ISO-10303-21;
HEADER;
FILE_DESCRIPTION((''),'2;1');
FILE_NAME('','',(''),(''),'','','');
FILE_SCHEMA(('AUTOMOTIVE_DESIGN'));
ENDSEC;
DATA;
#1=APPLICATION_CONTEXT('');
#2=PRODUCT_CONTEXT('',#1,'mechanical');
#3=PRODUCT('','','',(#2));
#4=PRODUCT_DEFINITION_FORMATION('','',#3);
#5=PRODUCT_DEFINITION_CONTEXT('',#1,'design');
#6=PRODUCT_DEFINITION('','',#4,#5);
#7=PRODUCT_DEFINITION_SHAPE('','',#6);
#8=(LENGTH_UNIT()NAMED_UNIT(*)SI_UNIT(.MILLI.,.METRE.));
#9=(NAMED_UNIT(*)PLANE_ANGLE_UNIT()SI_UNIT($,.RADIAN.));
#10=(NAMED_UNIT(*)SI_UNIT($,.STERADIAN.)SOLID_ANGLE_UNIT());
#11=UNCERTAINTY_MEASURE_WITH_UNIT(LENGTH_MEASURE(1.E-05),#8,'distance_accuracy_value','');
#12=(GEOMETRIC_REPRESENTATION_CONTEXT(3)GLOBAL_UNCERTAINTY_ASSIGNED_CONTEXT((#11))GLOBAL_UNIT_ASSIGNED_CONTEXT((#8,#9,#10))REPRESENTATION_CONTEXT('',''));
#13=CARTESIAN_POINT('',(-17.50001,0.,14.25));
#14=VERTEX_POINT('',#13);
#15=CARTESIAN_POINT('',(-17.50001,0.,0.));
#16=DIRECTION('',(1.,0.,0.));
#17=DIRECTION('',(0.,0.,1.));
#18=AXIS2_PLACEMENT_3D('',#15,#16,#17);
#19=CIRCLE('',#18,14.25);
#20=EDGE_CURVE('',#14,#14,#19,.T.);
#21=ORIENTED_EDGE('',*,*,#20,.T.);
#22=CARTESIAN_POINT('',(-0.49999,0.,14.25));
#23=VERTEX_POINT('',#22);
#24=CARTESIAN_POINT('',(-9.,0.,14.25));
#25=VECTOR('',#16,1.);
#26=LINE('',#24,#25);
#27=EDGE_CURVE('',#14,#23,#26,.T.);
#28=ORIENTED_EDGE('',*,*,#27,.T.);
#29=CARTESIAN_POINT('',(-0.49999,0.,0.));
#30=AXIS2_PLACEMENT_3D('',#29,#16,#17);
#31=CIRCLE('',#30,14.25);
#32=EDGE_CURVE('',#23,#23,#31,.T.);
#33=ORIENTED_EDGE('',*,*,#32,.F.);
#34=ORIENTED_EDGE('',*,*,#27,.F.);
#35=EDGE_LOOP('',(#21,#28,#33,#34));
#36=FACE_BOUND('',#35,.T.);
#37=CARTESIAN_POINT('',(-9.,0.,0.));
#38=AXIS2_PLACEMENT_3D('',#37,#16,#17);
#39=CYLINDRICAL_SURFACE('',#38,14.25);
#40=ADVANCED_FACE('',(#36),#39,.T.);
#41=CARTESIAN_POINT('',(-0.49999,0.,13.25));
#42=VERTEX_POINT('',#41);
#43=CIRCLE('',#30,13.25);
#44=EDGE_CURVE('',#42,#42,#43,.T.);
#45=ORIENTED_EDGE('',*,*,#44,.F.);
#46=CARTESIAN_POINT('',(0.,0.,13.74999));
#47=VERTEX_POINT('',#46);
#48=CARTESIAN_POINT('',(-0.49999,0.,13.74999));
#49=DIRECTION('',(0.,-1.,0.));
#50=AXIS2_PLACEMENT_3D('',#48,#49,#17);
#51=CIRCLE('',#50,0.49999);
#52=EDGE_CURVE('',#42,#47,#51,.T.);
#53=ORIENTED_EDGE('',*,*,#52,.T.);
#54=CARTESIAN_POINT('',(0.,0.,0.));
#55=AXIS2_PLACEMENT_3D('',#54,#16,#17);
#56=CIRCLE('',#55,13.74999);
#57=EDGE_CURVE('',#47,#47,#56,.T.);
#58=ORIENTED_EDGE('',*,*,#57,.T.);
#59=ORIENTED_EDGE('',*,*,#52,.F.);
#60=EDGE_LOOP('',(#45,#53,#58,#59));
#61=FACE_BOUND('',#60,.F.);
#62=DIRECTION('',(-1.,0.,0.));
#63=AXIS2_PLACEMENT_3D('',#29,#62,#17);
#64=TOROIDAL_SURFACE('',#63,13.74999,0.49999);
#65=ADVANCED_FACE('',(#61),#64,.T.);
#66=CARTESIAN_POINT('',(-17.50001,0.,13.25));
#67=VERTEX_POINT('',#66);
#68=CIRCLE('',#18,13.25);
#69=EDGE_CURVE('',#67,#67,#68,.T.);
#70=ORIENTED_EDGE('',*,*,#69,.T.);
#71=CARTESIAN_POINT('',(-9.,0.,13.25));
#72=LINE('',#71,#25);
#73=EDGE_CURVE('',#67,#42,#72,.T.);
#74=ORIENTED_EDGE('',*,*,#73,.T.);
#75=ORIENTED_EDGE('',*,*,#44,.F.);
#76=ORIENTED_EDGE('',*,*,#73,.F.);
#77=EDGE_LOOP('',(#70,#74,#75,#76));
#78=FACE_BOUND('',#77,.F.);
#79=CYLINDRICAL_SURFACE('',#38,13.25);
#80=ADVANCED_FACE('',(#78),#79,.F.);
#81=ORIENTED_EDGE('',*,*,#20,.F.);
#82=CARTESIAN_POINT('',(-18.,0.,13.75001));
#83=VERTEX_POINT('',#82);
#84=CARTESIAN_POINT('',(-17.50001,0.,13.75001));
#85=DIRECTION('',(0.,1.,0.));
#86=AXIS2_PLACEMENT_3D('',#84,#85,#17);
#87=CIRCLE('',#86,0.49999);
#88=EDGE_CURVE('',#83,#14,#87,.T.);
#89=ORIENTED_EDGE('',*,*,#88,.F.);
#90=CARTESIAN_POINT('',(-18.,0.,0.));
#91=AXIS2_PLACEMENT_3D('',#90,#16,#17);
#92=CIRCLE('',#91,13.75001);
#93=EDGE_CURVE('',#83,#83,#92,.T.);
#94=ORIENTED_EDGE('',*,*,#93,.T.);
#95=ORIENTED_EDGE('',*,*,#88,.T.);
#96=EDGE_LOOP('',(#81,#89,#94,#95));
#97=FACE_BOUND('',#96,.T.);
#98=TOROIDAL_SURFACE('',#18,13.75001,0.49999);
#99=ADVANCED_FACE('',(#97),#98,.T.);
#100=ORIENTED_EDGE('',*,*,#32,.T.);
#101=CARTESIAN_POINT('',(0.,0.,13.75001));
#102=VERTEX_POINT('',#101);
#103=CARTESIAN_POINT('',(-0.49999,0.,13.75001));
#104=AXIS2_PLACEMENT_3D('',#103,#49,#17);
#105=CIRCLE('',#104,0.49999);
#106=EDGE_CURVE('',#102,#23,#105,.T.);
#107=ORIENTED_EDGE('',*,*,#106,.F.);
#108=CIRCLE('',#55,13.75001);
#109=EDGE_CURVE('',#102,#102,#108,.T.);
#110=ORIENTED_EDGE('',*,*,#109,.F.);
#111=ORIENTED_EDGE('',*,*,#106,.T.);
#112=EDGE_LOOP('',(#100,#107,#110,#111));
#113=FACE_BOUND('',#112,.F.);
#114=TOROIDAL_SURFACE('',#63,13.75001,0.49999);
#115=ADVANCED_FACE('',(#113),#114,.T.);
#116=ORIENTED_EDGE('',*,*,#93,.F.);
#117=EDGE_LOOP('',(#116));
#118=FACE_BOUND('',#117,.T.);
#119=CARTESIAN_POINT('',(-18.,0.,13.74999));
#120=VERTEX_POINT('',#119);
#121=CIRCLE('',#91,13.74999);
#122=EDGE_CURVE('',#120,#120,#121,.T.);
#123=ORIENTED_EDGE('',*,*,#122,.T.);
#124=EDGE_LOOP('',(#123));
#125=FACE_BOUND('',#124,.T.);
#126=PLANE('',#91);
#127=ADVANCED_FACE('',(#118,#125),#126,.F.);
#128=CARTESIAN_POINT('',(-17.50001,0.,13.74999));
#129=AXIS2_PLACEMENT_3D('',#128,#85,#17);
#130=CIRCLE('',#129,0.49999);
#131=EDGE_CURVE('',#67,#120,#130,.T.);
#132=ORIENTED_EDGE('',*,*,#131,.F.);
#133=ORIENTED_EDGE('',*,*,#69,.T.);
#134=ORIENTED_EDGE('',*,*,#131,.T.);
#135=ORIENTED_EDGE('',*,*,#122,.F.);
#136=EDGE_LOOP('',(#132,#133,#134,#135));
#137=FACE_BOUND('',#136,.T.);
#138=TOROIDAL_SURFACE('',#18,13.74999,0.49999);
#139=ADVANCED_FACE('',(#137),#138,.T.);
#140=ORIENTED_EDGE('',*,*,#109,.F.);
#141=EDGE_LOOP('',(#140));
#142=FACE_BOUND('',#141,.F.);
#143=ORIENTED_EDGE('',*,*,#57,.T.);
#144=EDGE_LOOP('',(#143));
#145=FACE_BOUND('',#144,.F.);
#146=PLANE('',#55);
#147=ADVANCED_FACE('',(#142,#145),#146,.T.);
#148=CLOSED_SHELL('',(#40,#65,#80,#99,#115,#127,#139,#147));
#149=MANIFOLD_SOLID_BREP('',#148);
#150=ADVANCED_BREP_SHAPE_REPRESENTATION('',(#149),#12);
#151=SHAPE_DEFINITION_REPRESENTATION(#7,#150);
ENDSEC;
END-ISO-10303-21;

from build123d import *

# Parameters (mm, degrees)
F0_W = 18
F0_H = 1
F2_R = 0.49999
F3_R = 0.49999


# Not quite as in the source:
# - a fillet or chamfer is up to 0.001 mm smaller than in the source, because OpenCascade refuses the exact size


with BuildPart() as f1:
    # F0 (on Front) → F1 (revolve)
    with BuildSketch(Plane.XZ):
        with Locations((-9, 13.75)):
            Rectangle(F0_W, F0_H)
    revolve(axis=Axis((-8.2086159056, 0, 0), (1, 0, 0)))

    # F2 (radius 0.5 in the source; OpenCascade refuses exactly that, so slightly less here)
    f2_edges = [f1.edges().sort_by_distance(p)[0] for p in [
        (0, 0, -13.25),
        (0, 0, -14.25),
    ]]
    fillet(f2_edges, radius=F2_R)

    # F3 (radius 0.5 in the source; OpenCascade refuses exactly that, so slightly less here)
    f3_edges = [f1.edges().sort_by_distance(p)[0] for p in [
        (-18, 0, -14.25),
        (-18, 0, -13.25),
    ]]
    fillet(f3_edges, radius=F3_R)


solid = f1.part
